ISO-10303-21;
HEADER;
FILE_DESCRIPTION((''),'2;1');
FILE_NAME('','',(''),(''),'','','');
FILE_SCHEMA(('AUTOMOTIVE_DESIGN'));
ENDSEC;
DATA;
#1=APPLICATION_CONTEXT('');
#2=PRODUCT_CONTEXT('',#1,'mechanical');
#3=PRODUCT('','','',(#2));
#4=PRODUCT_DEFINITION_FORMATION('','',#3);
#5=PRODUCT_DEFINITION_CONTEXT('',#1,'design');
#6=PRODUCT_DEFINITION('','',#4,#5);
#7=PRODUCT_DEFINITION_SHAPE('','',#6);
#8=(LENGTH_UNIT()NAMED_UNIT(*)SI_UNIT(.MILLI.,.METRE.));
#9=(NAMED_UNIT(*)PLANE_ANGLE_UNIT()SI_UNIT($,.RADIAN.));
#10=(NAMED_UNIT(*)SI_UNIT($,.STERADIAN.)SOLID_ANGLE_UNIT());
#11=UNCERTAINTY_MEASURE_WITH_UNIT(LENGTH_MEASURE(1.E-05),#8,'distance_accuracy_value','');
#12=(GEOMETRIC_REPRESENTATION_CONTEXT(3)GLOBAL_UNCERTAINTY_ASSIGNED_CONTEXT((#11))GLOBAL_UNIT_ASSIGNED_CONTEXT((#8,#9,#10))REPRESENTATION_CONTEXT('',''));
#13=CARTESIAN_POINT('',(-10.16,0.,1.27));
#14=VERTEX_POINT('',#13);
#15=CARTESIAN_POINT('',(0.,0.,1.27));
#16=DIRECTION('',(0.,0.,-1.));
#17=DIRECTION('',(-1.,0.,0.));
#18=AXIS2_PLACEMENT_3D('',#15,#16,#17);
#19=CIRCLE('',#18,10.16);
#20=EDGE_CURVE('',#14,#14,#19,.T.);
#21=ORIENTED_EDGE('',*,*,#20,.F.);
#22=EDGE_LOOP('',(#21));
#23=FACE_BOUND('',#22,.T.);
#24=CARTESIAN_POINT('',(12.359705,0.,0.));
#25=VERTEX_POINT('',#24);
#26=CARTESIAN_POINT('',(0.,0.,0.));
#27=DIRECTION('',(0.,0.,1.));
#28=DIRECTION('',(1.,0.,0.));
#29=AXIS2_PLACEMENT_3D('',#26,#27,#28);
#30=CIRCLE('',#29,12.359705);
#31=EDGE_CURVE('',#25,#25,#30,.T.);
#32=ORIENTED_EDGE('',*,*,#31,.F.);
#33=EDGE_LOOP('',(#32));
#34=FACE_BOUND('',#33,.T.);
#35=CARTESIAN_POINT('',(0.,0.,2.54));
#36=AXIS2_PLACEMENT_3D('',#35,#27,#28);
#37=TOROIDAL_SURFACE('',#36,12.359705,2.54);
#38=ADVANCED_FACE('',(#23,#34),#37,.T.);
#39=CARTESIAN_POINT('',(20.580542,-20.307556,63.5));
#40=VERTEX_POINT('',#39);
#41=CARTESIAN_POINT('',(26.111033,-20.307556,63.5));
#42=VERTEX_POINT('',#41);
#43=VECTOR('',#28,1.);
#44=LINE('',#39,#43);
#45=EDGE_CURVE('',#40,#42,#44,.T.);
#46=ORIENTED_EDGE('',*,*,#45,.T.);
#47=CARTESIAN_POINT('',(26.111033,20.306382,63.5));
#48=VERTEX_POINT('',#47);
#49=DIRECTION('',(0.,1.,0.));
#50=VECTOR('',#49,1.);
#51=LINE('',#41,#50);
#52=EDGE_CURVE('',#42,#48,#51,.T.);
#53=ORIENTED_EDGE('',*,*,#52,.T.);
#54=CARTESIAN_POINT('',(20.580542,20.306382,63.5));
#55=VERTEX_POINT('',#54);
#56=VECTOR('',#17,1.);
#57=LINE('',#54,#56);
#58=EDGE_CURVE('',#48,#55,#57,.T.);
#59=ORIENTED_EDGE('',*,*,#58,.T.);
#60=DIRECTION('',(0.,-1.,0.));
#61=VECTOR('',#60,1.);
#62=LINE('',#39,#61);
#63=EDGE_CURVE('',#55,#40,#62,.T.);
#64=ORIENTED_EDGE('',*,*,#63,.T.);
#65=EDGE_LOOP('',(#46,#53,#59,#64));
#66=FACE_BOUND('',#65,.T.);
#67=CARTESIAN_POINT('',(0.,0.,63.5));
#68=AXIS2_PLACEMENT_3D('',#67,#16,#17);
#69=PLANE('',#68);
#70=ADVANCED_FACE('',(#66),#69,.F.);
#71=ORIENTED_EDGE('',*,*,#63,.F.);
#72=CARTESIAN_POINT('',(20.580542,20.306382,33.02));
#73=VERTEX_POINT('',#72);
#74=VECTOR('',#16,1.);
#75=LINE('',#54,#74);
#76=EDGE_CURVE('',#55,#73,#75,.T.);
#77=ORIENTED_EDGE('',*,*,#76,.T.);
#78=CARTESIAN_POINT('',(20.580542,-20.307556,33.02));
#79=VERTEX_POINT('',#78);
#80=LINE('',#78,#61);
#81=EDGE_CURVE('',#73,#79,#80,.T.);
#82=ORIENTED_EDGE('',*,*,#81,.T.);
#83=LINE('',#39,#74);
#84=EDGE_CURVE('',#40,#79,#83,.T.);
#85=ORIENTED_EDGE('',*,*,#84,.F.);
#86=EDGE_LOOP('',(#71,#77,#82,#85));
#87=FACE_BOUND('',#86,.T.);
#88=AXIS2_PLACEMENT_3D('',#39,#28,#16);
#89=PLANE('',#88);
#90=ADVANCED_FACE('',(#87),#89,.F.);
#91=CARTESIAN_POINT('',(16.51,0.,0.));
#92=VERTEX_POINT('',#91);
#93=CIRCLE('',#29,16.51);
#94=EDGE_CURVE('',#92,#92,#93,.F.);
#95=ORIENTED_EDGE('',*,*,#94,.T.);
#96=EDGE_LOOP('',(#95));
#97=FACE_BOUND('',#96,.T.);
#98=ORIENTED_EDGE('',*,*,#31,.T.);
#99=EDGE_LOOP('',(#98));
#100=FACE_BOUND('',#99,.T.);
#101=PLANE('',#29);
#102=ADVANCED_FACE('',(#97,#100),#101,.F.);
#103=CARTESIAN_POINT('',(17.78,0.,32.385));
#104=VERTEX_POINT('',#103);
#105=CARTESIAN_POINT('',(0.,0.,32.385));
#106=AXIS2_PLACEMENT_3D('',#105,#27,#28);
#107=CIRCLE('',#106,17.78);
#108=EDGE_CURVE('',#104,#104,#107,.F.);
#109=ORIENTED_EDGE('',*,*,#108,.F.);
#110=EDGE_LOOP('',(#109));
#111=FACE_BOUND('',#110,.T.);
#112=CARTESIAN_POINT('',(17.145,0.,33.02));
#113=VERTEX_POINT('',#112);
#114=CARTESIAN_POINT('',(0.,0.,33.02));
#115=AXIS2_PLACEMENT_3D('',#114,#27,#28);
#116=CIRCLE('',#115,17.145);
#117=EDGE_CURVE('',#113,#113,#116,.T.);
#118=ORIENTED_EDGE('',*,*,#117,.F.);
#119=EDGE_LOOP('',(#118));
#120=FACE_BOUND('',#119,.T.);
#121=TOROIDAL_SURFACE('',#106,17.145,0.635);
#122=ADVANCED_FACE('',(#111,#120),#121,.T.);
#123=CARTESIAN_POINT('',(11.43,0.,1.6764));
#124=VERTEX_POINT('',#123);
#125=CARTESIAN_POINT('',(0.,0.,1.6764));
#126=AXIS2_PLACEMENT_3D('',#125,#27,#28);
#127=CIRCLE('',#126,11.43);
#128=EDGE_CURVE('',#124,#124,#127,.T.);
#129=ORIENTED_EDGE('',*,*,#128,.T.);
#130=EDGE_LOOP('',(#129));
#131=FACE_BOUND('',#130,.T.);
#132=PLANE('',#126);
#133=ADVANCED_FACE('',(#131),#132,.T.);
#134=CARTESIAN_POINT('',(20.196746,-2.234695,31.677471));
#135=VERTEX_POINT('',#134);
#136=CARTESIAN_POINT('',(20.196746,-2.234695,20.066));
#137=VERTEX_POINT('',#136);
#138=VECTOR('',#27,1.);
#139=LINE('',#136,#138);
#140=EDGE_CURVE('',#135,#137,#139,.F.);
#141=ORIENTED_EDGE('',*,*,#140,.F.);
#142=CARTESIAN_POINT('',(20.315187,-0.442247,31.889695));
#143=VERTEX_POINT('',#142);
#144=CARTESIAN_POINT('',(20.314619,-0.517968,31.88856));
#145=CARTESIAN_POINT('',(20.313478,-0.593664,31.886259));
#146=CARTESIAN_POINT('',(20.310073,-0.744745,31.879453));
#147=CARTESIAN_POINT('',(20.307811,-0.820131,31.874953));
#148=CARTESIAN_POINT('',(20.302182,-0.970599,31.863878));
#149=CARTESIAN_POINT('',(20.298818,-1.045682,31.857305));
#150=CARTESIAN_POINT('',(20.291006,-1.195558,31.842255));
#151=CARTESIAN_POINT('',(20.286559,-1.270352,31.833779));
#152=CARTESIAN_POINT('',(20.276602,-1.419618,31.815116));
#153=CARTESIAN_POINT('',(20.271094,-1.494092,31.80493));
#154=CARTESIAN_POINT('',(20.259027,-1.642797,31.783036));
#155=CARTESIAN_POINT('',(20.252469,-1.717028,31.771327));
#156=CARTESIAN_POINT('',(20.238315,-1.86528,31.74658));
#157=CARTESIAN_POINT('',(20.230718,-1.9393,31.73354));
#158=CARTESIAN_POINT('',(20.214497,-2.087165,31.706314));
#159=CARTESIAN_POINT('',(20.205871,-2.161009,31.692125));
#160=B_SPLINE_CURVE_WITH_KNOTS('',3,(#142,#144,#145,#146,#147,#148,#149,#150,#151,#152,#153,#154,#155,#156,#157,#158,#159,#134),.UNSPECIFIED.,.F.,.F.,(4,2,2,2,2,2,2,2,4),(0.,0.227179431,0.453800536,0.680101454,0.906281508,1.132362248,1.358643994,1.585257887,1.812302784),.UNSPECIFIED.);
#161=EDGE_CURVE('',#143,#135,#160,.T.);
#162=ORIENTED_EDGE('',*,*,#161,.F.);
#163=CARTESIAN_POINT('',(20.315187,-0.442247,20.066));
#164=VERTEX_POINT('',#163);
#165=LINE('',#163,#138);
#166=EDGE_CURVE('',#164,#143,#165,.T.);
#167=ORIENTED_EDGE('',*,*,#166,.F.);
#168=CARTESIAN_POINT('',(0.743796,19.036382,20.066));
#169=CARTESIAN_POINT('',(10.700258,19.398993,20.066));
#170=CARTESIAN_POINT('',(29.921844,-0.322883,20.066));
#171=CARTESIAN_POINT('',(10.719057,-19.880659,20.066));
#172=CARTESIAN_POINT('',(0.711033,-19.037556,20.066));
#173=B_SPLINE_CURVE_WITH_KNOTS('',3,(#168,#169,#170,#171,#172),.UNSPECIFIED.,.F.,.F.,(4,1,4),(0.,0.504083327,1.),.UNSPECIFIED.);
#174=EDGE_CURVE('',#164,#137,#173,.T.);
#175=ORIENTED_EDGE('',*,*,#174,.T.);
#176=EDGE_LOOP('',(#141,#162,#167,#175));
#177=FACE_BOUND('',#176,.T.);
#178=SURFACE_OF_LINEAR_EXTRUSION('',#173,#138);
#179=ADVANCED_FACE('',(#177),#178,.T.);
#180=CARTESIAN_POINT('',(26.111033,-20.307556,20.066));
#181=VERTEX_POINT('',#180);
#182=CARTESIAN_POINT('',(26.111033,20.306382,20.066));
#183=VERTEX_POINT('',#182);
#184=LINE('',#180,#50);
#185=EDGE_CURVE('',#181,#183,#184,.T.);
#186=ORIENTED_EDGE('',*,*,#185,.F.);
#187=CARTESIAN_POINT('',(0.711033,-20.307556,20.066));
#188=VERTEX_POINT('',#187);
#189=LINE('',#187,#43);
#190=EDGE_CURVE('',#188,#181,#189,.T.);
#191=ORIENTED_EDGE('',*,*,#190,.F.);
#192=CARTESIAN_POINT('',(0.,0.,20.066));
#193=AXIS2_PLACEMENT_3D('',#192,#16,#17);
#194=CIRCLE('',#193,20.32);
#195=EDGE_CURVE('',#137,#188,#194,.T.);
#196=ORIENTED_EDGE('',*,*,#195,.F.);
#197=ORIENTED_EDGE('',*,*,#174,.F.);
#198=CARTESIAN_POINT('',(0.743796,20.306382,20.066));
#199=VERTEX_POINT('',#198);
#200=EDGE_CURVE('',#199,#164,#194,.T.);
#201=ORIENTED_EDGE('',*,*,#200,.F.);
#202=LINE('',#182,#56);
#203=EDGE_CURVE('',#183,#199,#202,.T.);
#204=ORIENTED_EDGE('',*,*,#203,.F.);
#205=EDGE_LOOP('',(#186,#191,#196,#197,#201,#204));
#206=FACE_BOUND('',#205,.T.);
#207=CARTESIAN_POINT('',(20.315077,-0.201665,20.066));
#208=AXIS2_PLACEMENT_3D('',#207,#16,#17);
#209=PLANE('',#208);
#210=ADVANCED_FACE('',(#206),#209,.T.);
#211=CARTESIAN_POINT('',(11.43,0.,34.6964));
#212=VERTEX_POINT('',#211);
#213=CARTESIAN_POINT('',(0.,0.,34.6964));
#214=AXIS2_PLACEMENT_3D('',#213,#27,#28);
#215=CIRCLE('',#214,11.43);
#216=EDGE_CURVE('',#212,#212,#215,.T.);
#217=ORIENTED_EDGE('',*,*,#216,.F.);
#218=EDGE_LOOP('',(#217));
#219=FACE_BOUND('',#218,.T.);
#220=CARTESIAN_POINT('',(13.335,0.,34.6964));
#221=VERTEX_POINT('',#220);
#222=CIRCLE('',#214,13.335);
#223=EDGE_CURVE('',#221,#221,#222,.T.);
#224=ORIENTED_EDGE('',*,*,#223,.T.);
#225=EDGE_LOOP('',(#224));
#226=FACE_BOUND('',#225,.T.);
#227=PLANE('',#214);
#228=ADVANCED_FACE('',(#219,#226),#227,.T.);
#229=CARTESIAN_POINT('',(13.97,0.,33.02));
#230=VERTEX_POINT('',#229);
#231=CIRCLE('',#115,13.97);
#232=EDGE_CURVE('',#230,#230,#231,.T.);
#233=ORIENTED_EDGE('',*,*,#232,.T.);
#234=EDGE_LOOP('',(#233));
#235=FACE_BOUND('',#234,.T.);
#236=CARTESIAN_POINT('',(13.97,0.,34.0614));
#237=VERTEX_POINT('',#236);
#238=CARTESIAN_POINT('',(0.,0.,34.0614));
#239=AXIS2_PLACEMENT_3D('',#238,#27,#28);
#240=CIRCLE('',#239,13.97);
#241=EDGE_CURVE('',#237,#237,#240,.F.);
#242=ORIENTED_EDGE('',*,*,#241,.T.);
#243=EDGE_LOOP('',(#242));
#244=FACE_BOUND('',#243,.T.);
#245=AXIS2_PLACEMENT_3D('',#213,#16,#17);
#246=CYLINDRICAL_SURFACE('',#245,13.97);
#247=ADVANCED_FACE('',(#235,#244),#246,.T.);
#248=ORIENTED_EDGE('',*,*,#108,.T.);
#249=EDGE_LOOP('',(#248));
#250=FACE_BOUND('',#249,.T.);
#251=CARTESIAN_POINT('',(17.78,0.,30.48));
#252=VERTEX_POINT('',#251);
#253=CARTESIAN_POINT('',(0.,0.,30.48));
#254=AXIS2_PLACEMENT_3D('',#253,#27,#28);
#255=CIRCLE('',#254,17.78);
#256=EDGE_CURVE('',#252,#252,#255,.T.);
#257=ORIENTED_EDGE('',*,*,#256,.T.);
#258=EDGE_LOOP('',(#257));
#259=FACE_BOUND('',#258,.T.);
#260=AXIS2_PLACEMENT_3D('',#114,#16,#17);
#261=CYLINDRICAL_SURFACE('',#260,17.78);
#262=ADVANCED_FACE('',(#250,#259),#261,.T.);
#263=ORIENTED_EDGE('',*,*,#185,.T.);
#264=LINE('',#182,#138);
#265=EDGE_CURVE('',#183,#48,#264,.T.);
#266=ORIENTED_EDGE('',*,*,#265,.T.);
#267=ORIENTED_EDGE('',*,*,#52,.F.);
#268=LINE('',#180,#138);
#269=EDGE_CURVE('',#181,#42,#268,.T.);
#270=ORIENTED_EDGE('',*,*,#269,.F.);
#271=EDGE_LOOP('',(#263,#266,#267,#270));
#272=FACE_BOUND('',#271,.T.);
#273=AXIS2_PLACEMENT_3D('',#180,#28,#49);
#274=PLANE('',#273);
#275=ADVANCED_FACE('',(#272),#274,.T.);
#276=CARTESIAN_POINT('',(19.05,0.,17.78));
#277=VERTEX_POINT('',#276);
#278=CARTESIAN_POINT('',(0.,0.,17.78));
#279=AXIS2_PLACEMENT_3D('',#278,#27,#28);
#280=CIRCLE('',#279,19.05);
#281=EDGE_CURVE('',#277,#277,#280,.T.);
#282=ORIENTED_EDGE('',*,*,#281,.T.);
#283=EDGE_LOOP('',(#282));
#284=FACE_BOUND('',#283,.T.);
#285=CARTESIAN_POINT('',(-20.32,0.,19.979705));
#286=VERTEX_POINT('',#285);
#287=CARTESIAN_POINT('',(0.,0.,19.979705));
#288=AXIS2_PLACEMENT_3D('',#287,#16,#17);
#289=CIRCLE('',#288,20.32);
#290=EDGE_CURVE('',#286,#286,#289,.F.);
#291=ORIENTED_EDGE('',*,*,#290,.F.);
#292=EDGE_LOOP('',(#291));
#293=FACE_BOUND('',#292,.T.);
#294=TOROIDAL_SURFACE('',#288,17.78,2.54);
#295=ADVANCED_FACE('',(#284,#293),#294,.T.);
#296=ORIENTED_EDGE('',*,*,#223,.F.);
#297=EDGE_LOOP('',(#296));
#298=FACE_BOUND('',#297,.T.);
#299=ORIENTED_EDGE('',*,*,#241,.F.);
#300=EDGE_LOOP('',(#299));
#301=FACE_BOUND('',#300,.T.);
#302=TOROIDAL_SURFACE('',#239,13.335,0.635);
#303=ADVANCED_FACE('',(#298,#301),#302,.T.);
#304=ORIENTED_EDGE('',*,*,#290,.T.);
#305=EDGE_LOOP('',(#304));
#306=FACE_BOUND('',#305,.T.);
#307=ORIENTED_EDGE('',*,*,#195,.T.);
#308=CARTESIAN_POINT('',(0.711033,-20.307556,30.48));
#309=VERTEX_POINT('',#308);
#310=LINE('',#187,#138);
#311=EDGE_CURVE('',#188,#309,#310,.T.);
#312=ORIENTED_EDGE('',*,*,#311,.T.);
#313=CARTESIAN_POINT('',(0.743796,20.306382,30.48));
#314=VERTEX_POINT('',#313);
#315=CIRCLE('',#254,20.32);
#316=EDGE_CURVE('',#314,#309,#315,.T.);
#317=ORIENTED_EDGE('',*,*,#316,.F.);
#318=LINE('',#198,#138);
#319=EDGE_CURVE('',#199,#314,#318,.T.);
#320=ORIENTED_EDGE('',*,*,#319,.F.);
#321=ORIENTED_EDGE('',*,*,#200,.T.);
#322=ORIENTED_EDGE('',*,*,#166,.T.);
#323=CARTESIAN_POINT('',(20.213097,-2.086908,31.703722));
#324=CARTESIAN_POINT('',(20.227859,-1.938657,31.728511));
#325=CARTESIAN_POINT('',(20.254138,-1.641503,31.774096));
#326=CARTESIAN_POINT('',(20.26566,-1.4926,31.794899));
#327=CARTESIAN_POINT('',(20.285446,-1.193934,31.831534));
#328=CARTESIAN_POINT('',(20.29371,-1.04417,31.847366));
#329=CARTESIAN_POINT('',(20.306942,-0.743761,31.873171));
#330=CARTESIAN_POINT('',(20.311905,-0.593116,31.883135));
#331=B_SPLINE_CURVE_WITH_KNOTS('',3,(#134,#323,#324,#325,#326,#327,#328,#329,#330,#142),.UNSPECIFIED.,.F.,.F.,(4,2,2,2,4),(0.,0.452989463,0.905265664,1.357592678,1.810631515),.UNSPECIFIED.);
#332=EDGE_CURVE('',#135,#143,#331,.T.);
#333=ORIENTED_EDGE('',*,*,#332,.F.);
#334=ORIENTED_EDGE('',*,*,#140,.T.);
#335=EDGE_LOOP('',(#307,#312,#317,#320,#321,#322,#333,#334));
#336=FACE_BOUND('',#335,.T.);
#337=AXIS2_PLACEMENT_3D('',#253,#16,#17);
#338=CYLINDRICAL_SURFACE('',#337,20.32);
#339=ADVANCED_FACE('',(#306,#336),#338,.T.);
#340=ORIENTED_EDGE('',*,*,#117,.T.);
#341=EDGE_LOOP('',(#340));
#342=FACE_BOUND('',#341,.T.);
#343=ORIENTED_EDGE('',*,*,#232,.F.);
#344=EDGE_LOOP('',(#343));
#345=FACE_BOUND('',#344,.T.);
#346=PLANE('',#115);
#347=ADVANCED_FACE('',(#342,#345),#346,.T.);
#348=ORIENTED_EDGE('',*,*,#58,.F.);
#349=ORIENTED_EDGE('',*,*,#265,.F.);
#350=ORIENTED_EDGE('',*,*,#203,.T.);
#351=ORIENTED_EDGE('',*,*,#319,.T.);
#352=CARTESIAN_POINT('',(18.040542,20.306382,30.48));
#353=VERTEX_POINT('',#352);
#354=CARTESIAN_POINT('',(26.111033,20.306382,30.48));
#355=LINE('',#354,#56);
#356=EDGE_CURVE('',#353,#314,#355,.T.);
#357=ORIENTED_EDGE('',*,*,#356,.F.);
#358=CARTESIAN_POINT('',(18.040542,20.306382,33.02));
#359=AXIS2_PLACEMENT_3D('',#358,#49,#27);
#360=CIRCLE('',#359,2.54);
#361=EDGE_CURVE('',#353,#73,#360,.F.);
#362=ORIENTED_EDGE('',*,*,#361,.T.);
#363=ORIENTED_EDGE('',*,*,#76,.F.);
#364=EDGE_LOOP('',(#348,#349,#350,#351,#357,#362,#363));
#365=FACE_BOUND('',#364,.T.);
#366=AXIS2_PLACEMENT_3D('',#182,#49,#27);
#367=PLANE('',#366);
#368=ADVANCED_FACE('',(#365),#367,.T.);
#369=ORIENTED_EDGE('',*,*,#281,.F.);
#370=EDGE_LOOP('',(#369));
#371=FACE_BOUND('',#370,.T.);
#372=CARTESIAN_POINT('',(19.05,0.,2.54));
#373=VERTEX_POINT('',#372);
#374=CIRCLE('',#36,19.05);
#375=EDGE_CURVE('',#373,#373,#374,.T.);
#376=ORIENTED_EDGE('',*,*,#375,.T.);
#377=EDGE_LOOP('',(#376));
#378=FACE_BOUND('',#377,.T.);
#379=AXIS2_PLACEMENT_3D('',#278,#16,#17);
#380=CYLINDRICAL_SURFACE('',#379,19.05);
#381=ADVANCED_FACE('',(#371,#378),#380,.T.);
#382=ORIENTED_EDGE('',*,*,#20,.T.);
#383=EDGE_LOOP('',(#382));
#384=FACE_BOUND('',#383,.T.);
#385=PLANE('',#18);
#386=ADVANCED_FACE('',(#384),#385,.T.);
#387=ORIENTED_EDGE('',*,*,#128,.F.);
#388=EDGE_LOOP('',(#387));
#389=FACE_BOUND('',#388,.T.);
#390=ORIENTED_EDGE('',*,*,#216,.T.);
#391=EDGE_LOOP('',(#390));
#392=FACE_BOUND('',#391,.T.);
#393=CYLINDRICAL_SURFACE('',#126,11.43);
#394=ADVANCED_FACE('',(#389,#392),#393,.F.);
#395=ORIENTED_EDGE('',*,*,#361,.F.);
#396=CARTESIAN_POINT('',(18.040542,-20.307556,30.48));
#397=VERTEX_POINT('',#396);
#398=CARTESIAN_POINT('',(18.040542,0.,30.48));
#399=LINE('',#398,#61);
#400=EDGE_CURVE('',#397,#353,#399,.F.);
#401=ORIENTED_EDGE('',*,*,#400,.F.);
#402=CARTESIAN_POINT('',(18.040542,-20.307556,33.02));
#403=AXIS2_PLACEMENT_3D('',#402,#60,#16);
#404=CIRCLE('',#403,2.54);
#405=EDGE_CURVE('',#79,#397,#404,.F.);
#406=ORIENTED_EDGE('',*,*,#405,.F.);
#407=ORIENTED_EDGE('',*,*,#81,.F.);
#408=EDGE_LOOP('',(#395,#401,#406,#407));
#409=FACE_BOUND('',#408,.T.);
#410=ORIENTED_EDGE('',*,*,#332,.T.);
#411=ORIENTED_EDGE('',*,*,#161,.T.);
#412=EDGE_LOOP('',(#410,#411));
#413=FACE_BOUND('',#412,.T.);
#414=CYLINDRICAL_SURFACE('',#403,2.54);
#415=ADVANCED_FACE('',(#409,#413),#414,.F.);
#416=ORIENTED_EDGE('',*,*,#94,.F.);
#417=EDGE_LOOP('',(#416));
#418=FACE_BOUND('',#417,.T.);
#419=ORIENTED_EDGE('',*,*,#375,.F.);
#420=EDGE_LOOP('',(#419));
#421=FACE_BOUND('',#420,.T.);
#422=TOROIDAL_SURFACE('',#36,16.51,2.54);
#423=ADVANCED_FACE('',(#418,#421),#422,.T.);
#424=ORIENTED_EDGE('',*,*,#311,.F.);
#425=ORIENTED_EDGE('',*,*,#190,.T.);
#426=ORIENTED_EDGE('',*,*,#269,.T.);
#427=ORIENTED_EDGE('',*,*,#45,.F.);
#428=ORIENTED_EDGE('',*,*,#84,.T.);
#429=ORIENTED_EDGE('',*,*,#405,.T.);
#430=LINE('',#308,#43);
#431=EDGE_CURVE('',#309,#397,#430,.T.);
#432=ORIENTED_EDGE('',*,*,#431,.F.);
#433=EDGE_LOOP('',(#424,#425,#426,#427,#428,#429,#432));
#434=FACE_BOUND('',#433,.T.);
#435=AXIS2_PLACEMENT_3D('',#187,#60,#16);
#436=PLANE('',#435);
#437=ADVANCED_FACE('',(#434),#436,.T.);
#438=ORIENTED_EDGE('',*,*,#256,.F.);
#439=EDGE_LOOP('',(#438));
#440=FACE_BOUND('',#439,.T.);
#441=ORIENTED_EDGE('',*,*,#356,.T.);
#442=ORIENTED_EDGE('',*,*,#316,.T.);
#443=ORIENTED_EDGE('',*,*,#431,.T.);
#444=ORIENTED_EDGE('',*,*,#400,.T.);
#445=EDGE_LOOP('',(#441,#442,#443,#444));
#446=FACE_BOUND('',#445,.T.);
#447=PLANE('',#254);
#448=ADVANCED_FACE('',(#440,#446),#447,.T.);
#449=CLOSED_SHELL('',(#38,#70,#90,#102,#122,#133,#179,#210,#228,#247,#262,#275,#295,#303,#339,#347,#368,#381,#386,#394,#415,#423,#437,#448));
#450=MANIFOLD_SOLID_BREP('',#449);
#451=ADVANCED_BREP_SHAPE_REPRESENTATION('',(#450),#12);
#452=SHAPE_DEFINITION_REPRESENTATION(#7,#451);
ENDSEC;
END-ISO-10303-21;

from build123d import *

# Parameters (mm, degrees)
SKETCH1_R           = 19.05
BOSS_EXTRUDE1_DEPTH = 17.78
SKETCH2_R           = 10.16
CUT_EXTRUDE1_DEPTH  = 1.27
FILLET1_R           = 2.54
FILLET2_R           = 2.54
SKETCH3_R           = 20.32
BOSS_EXTRUDE2_DEPTH = 12.7
FILLET3_R           = 2.54
SKETCH4_R           = 17.78
BOSS_EXTRUDE3_DEPTH = 2.54
SKETCH5_R           = 13.97
BOSS_EXTRUDE4_DEPTH = 1.6764
FILLET5_R           = 0.635
SKETCH6_R           = 11.43
CUT_EXTRUDE2_DEPTH  = 33.02
BOSS_EXTRUDE6_DEPTH = 10.414
SKETCH9_W           = 5.530491266
SKETCH9_H           = 40.61393848
BOSS_EXTRUDE7_DEPTH = 33.02
FILLET6_START       = -20.30755603
FILLET6_DEPTH       = 40.61393848
FILLET6_START_2     = 30.48
FILLET6_2_DEPTH     = 2.52


with BuildPart() as part:
    # Sketch1 → Boss-Extrude1 (new body)
    with BuildSketch(Plane.XY):
        Circle(SKETCH1_R)
    extrude(amount=BOSS_EXTRUDE1_DEPTH)

    # Sketch2 → Cut-Extrude1 (cut)
    with BuildSketch(Plane(origin=(0, 0, 0), x_dir=(-1, 0, 0), z_dir=(0, 0, -1))):
        Circle(SKETCH2_R)
    extrude(amount=-CUT_EXTRUDE1_DEPTH, mode=Mode.SUBTRACT)

    # Fillet1
    # the kernel refuses this fillet: 2.54 mm, written as the material it takes off along each edge
    with BuildSketch(Plane(origin=(0, 0, 0), x_dir=(-1, 0, 0), z_dir=(0, -1, 0))) as fillet1_piece_1:
        with BuildLine():
            CenterArc((12.359704526, -2.54), FILLET1_R, 90, 60)
            Line((10.16, -1.27), (10.116005909, -1.2446))
            ThreePointArc((10.116005909, -1.2446), (10.1092, -0.635), (10.1092, 0))
            Line((10.1092, 0), (10.16, 0.0508))
            Line((10.16, 0.0508), (12.359704526, 0.0508))
            Line((12.359704526, 0.0508), (12.359704526, 0))
        make_face()
    revolve(axis=Axis((0, 0, 0), (0, 0, -1)), mode=Mode.SUBTRACT)

    # Fillet2
    fillet2_edges = [part.edges().sort_by_distance(p)[0] for p in [
        (-19.05, 0, 0),
    ]]
    fillet(fillet2_edges, radius=FILLET2_R)

    # Sketch3 → Boss-Extrude2 (add)
    with BuildSketch(Plane.XY.offset(17.78)):
        Circle(SKETCH3_R)
    extrude(amount=BOSS_EXTRUDE2_DEPTH)

    # Fillet3
    # the kernel refuses this fillet: 2.54 mm, written as the material it takes off along each edge
    with BuildSketch(Plane(origin=(0, 0, 17.78), x_dir=(1, 0, 0), z_dir=(0, -1, 0))) as fillet3_piece_1:
        with BuildLine():
            CenterArc((17.78, 2.199704526), FILLET3_R, 300, 60)
            Line((19.05, 0), (19.0754, -0.043994091))
            ThreePointArc((19.0754, -0.043994091), (19.685, -0.0508), (20.32, -0.0508))
            Line((20.32, -0.0508), (20.3708, 0))
            Line((20.3708, 0), (20.3708, 2.199704526))
            Line((20.3708, 2.199704526), (20.32, 2.199704526))
        make_face()
    revolve(axis=Axis((0, 0, 17.78), (0, 0, 1)), mode=Mode.SUBTRACT)

    # Sketch4 → Boss-Extrude3 (add)
    with BuildSketch(Plane.XY.offset(30.48)):
        Circle(SKETCH4_R)
    extrude(amount=BOSS_EXTRUDE3_DEPTH)

    # Sketch5 → Boss-Extrude4 (add)
    with BuildSketch(Plane.XY.offset(33.02)):
        Circle(SKETCH5_R)
    extrude(amount=BOSS_EXTRUDE4_DEPTH)

    # Fillet5
    fillet5_edges = [part.edges().sort_by_distance(p)[0] for p in [
        (-17.78, 0, 33.02),
        (-13.97, 0, 34.6964),
    ]]
    fillet(fillet5_edges, radius=FILLET5_R)

    # Sketch6 → Cut-Extrude2 (cut)
    with BuildSketch(Plane.XY.offset(34.6964)):
        Circle(SKETCH6_R)
    extrude(amount=-CUT_EXTRUDE2_DEPTH, mode=Mode.SUBTRACT)

    # Sketch7 → Boss-Extrude6 (add)
    with BuildSketch(Plane.XY.offset(30.48)):
        with BuildLine():
            Line((0.71103311, -20.30755603), (26.11103311, -20.30755603))
            Line((26.11103311, -20.30755603), (26.11103311, 20.30638245))
            Line((26.11103311, 20.30638245), (0.743795542, 20.30638245))
            Line((0.743795542, 20.30638245), (0.743795542, 19.03638245))
            add(Edge.make_bspline(
                [(0.71103311, -19.03755603), (10.719056995, -19.88065927), (29.921844126, -0.322882605), (10.700257888, 19.398993092), (0.743795542, 19.03638245)],
                knots=[0, 0, 0, 0, 0.495916673, 1, 1, 1, 1], degree=3))
            Line((0.71103311, -19.03755603), (0.71103311, -20.30755603))
        make_face()
    extrude(amount=-BOSS_EXTRUDE6_DEPTH)

    # Sketch9 → Boss-Extrude7 (add)
    with BuildSketch(Plane.XY.offset(30.48)):
        with Locations((23.345787477, -0.00058679)):
            Rectangle(SKETCH9_W, SKETCH9_H)
    extrude(amount=BOSS_EXTRUDE7_DEPTH)

    # Fillet6: read off the stored shape, not the designer's step
    # Fillet6 outline → Fillet6 (add)
    with BuildSketch(Plane(origin=(0, 0, 0), x_dir=(1, 0, 0), z_dir=(0, 1, 0)).offset(FILLET6_START)):
        with BuildLine():
            Line((20.580541844, -30.48), (18.040541844, -30.48))
            ThreePointArc((18.040541844, -30.48), (19.836593068, -31.223948776), (20.580541844, -33.02))
            Line((20.580541844, -33.02), (20.580541844, -30.48))
        make_face()
    extrude(amount=FILLET6_DEPTH)

    # Fillet6 2 outline → Fillet6 2 (cut)
    with BuildSketch(Plane.XY.offset(FILLET6_START_2)):
        with BuildLine():
            add(Edge.make_bspline(
                [(20.315186876, -0.442246776), (20.310692243, -1.040693916), (20.270518605, -1.638988681), (20.196745769, -2.234694689)],
                knots=[0.504083327, 0.504083327, 0.504083327, 0.504083327, 0.534555468, 0.534555468, 0.534555468, 0.534555468], degree=3))
            ThreePointArc((20.315186876, -0.442246776), (20.275783315, -1.339780197), (20.196745769, -2.234694689))
        make_face()
    extrude(amount=FILLET6_2_DEPTH, mode=Mode.SUBTRACT)


solid = part.part
